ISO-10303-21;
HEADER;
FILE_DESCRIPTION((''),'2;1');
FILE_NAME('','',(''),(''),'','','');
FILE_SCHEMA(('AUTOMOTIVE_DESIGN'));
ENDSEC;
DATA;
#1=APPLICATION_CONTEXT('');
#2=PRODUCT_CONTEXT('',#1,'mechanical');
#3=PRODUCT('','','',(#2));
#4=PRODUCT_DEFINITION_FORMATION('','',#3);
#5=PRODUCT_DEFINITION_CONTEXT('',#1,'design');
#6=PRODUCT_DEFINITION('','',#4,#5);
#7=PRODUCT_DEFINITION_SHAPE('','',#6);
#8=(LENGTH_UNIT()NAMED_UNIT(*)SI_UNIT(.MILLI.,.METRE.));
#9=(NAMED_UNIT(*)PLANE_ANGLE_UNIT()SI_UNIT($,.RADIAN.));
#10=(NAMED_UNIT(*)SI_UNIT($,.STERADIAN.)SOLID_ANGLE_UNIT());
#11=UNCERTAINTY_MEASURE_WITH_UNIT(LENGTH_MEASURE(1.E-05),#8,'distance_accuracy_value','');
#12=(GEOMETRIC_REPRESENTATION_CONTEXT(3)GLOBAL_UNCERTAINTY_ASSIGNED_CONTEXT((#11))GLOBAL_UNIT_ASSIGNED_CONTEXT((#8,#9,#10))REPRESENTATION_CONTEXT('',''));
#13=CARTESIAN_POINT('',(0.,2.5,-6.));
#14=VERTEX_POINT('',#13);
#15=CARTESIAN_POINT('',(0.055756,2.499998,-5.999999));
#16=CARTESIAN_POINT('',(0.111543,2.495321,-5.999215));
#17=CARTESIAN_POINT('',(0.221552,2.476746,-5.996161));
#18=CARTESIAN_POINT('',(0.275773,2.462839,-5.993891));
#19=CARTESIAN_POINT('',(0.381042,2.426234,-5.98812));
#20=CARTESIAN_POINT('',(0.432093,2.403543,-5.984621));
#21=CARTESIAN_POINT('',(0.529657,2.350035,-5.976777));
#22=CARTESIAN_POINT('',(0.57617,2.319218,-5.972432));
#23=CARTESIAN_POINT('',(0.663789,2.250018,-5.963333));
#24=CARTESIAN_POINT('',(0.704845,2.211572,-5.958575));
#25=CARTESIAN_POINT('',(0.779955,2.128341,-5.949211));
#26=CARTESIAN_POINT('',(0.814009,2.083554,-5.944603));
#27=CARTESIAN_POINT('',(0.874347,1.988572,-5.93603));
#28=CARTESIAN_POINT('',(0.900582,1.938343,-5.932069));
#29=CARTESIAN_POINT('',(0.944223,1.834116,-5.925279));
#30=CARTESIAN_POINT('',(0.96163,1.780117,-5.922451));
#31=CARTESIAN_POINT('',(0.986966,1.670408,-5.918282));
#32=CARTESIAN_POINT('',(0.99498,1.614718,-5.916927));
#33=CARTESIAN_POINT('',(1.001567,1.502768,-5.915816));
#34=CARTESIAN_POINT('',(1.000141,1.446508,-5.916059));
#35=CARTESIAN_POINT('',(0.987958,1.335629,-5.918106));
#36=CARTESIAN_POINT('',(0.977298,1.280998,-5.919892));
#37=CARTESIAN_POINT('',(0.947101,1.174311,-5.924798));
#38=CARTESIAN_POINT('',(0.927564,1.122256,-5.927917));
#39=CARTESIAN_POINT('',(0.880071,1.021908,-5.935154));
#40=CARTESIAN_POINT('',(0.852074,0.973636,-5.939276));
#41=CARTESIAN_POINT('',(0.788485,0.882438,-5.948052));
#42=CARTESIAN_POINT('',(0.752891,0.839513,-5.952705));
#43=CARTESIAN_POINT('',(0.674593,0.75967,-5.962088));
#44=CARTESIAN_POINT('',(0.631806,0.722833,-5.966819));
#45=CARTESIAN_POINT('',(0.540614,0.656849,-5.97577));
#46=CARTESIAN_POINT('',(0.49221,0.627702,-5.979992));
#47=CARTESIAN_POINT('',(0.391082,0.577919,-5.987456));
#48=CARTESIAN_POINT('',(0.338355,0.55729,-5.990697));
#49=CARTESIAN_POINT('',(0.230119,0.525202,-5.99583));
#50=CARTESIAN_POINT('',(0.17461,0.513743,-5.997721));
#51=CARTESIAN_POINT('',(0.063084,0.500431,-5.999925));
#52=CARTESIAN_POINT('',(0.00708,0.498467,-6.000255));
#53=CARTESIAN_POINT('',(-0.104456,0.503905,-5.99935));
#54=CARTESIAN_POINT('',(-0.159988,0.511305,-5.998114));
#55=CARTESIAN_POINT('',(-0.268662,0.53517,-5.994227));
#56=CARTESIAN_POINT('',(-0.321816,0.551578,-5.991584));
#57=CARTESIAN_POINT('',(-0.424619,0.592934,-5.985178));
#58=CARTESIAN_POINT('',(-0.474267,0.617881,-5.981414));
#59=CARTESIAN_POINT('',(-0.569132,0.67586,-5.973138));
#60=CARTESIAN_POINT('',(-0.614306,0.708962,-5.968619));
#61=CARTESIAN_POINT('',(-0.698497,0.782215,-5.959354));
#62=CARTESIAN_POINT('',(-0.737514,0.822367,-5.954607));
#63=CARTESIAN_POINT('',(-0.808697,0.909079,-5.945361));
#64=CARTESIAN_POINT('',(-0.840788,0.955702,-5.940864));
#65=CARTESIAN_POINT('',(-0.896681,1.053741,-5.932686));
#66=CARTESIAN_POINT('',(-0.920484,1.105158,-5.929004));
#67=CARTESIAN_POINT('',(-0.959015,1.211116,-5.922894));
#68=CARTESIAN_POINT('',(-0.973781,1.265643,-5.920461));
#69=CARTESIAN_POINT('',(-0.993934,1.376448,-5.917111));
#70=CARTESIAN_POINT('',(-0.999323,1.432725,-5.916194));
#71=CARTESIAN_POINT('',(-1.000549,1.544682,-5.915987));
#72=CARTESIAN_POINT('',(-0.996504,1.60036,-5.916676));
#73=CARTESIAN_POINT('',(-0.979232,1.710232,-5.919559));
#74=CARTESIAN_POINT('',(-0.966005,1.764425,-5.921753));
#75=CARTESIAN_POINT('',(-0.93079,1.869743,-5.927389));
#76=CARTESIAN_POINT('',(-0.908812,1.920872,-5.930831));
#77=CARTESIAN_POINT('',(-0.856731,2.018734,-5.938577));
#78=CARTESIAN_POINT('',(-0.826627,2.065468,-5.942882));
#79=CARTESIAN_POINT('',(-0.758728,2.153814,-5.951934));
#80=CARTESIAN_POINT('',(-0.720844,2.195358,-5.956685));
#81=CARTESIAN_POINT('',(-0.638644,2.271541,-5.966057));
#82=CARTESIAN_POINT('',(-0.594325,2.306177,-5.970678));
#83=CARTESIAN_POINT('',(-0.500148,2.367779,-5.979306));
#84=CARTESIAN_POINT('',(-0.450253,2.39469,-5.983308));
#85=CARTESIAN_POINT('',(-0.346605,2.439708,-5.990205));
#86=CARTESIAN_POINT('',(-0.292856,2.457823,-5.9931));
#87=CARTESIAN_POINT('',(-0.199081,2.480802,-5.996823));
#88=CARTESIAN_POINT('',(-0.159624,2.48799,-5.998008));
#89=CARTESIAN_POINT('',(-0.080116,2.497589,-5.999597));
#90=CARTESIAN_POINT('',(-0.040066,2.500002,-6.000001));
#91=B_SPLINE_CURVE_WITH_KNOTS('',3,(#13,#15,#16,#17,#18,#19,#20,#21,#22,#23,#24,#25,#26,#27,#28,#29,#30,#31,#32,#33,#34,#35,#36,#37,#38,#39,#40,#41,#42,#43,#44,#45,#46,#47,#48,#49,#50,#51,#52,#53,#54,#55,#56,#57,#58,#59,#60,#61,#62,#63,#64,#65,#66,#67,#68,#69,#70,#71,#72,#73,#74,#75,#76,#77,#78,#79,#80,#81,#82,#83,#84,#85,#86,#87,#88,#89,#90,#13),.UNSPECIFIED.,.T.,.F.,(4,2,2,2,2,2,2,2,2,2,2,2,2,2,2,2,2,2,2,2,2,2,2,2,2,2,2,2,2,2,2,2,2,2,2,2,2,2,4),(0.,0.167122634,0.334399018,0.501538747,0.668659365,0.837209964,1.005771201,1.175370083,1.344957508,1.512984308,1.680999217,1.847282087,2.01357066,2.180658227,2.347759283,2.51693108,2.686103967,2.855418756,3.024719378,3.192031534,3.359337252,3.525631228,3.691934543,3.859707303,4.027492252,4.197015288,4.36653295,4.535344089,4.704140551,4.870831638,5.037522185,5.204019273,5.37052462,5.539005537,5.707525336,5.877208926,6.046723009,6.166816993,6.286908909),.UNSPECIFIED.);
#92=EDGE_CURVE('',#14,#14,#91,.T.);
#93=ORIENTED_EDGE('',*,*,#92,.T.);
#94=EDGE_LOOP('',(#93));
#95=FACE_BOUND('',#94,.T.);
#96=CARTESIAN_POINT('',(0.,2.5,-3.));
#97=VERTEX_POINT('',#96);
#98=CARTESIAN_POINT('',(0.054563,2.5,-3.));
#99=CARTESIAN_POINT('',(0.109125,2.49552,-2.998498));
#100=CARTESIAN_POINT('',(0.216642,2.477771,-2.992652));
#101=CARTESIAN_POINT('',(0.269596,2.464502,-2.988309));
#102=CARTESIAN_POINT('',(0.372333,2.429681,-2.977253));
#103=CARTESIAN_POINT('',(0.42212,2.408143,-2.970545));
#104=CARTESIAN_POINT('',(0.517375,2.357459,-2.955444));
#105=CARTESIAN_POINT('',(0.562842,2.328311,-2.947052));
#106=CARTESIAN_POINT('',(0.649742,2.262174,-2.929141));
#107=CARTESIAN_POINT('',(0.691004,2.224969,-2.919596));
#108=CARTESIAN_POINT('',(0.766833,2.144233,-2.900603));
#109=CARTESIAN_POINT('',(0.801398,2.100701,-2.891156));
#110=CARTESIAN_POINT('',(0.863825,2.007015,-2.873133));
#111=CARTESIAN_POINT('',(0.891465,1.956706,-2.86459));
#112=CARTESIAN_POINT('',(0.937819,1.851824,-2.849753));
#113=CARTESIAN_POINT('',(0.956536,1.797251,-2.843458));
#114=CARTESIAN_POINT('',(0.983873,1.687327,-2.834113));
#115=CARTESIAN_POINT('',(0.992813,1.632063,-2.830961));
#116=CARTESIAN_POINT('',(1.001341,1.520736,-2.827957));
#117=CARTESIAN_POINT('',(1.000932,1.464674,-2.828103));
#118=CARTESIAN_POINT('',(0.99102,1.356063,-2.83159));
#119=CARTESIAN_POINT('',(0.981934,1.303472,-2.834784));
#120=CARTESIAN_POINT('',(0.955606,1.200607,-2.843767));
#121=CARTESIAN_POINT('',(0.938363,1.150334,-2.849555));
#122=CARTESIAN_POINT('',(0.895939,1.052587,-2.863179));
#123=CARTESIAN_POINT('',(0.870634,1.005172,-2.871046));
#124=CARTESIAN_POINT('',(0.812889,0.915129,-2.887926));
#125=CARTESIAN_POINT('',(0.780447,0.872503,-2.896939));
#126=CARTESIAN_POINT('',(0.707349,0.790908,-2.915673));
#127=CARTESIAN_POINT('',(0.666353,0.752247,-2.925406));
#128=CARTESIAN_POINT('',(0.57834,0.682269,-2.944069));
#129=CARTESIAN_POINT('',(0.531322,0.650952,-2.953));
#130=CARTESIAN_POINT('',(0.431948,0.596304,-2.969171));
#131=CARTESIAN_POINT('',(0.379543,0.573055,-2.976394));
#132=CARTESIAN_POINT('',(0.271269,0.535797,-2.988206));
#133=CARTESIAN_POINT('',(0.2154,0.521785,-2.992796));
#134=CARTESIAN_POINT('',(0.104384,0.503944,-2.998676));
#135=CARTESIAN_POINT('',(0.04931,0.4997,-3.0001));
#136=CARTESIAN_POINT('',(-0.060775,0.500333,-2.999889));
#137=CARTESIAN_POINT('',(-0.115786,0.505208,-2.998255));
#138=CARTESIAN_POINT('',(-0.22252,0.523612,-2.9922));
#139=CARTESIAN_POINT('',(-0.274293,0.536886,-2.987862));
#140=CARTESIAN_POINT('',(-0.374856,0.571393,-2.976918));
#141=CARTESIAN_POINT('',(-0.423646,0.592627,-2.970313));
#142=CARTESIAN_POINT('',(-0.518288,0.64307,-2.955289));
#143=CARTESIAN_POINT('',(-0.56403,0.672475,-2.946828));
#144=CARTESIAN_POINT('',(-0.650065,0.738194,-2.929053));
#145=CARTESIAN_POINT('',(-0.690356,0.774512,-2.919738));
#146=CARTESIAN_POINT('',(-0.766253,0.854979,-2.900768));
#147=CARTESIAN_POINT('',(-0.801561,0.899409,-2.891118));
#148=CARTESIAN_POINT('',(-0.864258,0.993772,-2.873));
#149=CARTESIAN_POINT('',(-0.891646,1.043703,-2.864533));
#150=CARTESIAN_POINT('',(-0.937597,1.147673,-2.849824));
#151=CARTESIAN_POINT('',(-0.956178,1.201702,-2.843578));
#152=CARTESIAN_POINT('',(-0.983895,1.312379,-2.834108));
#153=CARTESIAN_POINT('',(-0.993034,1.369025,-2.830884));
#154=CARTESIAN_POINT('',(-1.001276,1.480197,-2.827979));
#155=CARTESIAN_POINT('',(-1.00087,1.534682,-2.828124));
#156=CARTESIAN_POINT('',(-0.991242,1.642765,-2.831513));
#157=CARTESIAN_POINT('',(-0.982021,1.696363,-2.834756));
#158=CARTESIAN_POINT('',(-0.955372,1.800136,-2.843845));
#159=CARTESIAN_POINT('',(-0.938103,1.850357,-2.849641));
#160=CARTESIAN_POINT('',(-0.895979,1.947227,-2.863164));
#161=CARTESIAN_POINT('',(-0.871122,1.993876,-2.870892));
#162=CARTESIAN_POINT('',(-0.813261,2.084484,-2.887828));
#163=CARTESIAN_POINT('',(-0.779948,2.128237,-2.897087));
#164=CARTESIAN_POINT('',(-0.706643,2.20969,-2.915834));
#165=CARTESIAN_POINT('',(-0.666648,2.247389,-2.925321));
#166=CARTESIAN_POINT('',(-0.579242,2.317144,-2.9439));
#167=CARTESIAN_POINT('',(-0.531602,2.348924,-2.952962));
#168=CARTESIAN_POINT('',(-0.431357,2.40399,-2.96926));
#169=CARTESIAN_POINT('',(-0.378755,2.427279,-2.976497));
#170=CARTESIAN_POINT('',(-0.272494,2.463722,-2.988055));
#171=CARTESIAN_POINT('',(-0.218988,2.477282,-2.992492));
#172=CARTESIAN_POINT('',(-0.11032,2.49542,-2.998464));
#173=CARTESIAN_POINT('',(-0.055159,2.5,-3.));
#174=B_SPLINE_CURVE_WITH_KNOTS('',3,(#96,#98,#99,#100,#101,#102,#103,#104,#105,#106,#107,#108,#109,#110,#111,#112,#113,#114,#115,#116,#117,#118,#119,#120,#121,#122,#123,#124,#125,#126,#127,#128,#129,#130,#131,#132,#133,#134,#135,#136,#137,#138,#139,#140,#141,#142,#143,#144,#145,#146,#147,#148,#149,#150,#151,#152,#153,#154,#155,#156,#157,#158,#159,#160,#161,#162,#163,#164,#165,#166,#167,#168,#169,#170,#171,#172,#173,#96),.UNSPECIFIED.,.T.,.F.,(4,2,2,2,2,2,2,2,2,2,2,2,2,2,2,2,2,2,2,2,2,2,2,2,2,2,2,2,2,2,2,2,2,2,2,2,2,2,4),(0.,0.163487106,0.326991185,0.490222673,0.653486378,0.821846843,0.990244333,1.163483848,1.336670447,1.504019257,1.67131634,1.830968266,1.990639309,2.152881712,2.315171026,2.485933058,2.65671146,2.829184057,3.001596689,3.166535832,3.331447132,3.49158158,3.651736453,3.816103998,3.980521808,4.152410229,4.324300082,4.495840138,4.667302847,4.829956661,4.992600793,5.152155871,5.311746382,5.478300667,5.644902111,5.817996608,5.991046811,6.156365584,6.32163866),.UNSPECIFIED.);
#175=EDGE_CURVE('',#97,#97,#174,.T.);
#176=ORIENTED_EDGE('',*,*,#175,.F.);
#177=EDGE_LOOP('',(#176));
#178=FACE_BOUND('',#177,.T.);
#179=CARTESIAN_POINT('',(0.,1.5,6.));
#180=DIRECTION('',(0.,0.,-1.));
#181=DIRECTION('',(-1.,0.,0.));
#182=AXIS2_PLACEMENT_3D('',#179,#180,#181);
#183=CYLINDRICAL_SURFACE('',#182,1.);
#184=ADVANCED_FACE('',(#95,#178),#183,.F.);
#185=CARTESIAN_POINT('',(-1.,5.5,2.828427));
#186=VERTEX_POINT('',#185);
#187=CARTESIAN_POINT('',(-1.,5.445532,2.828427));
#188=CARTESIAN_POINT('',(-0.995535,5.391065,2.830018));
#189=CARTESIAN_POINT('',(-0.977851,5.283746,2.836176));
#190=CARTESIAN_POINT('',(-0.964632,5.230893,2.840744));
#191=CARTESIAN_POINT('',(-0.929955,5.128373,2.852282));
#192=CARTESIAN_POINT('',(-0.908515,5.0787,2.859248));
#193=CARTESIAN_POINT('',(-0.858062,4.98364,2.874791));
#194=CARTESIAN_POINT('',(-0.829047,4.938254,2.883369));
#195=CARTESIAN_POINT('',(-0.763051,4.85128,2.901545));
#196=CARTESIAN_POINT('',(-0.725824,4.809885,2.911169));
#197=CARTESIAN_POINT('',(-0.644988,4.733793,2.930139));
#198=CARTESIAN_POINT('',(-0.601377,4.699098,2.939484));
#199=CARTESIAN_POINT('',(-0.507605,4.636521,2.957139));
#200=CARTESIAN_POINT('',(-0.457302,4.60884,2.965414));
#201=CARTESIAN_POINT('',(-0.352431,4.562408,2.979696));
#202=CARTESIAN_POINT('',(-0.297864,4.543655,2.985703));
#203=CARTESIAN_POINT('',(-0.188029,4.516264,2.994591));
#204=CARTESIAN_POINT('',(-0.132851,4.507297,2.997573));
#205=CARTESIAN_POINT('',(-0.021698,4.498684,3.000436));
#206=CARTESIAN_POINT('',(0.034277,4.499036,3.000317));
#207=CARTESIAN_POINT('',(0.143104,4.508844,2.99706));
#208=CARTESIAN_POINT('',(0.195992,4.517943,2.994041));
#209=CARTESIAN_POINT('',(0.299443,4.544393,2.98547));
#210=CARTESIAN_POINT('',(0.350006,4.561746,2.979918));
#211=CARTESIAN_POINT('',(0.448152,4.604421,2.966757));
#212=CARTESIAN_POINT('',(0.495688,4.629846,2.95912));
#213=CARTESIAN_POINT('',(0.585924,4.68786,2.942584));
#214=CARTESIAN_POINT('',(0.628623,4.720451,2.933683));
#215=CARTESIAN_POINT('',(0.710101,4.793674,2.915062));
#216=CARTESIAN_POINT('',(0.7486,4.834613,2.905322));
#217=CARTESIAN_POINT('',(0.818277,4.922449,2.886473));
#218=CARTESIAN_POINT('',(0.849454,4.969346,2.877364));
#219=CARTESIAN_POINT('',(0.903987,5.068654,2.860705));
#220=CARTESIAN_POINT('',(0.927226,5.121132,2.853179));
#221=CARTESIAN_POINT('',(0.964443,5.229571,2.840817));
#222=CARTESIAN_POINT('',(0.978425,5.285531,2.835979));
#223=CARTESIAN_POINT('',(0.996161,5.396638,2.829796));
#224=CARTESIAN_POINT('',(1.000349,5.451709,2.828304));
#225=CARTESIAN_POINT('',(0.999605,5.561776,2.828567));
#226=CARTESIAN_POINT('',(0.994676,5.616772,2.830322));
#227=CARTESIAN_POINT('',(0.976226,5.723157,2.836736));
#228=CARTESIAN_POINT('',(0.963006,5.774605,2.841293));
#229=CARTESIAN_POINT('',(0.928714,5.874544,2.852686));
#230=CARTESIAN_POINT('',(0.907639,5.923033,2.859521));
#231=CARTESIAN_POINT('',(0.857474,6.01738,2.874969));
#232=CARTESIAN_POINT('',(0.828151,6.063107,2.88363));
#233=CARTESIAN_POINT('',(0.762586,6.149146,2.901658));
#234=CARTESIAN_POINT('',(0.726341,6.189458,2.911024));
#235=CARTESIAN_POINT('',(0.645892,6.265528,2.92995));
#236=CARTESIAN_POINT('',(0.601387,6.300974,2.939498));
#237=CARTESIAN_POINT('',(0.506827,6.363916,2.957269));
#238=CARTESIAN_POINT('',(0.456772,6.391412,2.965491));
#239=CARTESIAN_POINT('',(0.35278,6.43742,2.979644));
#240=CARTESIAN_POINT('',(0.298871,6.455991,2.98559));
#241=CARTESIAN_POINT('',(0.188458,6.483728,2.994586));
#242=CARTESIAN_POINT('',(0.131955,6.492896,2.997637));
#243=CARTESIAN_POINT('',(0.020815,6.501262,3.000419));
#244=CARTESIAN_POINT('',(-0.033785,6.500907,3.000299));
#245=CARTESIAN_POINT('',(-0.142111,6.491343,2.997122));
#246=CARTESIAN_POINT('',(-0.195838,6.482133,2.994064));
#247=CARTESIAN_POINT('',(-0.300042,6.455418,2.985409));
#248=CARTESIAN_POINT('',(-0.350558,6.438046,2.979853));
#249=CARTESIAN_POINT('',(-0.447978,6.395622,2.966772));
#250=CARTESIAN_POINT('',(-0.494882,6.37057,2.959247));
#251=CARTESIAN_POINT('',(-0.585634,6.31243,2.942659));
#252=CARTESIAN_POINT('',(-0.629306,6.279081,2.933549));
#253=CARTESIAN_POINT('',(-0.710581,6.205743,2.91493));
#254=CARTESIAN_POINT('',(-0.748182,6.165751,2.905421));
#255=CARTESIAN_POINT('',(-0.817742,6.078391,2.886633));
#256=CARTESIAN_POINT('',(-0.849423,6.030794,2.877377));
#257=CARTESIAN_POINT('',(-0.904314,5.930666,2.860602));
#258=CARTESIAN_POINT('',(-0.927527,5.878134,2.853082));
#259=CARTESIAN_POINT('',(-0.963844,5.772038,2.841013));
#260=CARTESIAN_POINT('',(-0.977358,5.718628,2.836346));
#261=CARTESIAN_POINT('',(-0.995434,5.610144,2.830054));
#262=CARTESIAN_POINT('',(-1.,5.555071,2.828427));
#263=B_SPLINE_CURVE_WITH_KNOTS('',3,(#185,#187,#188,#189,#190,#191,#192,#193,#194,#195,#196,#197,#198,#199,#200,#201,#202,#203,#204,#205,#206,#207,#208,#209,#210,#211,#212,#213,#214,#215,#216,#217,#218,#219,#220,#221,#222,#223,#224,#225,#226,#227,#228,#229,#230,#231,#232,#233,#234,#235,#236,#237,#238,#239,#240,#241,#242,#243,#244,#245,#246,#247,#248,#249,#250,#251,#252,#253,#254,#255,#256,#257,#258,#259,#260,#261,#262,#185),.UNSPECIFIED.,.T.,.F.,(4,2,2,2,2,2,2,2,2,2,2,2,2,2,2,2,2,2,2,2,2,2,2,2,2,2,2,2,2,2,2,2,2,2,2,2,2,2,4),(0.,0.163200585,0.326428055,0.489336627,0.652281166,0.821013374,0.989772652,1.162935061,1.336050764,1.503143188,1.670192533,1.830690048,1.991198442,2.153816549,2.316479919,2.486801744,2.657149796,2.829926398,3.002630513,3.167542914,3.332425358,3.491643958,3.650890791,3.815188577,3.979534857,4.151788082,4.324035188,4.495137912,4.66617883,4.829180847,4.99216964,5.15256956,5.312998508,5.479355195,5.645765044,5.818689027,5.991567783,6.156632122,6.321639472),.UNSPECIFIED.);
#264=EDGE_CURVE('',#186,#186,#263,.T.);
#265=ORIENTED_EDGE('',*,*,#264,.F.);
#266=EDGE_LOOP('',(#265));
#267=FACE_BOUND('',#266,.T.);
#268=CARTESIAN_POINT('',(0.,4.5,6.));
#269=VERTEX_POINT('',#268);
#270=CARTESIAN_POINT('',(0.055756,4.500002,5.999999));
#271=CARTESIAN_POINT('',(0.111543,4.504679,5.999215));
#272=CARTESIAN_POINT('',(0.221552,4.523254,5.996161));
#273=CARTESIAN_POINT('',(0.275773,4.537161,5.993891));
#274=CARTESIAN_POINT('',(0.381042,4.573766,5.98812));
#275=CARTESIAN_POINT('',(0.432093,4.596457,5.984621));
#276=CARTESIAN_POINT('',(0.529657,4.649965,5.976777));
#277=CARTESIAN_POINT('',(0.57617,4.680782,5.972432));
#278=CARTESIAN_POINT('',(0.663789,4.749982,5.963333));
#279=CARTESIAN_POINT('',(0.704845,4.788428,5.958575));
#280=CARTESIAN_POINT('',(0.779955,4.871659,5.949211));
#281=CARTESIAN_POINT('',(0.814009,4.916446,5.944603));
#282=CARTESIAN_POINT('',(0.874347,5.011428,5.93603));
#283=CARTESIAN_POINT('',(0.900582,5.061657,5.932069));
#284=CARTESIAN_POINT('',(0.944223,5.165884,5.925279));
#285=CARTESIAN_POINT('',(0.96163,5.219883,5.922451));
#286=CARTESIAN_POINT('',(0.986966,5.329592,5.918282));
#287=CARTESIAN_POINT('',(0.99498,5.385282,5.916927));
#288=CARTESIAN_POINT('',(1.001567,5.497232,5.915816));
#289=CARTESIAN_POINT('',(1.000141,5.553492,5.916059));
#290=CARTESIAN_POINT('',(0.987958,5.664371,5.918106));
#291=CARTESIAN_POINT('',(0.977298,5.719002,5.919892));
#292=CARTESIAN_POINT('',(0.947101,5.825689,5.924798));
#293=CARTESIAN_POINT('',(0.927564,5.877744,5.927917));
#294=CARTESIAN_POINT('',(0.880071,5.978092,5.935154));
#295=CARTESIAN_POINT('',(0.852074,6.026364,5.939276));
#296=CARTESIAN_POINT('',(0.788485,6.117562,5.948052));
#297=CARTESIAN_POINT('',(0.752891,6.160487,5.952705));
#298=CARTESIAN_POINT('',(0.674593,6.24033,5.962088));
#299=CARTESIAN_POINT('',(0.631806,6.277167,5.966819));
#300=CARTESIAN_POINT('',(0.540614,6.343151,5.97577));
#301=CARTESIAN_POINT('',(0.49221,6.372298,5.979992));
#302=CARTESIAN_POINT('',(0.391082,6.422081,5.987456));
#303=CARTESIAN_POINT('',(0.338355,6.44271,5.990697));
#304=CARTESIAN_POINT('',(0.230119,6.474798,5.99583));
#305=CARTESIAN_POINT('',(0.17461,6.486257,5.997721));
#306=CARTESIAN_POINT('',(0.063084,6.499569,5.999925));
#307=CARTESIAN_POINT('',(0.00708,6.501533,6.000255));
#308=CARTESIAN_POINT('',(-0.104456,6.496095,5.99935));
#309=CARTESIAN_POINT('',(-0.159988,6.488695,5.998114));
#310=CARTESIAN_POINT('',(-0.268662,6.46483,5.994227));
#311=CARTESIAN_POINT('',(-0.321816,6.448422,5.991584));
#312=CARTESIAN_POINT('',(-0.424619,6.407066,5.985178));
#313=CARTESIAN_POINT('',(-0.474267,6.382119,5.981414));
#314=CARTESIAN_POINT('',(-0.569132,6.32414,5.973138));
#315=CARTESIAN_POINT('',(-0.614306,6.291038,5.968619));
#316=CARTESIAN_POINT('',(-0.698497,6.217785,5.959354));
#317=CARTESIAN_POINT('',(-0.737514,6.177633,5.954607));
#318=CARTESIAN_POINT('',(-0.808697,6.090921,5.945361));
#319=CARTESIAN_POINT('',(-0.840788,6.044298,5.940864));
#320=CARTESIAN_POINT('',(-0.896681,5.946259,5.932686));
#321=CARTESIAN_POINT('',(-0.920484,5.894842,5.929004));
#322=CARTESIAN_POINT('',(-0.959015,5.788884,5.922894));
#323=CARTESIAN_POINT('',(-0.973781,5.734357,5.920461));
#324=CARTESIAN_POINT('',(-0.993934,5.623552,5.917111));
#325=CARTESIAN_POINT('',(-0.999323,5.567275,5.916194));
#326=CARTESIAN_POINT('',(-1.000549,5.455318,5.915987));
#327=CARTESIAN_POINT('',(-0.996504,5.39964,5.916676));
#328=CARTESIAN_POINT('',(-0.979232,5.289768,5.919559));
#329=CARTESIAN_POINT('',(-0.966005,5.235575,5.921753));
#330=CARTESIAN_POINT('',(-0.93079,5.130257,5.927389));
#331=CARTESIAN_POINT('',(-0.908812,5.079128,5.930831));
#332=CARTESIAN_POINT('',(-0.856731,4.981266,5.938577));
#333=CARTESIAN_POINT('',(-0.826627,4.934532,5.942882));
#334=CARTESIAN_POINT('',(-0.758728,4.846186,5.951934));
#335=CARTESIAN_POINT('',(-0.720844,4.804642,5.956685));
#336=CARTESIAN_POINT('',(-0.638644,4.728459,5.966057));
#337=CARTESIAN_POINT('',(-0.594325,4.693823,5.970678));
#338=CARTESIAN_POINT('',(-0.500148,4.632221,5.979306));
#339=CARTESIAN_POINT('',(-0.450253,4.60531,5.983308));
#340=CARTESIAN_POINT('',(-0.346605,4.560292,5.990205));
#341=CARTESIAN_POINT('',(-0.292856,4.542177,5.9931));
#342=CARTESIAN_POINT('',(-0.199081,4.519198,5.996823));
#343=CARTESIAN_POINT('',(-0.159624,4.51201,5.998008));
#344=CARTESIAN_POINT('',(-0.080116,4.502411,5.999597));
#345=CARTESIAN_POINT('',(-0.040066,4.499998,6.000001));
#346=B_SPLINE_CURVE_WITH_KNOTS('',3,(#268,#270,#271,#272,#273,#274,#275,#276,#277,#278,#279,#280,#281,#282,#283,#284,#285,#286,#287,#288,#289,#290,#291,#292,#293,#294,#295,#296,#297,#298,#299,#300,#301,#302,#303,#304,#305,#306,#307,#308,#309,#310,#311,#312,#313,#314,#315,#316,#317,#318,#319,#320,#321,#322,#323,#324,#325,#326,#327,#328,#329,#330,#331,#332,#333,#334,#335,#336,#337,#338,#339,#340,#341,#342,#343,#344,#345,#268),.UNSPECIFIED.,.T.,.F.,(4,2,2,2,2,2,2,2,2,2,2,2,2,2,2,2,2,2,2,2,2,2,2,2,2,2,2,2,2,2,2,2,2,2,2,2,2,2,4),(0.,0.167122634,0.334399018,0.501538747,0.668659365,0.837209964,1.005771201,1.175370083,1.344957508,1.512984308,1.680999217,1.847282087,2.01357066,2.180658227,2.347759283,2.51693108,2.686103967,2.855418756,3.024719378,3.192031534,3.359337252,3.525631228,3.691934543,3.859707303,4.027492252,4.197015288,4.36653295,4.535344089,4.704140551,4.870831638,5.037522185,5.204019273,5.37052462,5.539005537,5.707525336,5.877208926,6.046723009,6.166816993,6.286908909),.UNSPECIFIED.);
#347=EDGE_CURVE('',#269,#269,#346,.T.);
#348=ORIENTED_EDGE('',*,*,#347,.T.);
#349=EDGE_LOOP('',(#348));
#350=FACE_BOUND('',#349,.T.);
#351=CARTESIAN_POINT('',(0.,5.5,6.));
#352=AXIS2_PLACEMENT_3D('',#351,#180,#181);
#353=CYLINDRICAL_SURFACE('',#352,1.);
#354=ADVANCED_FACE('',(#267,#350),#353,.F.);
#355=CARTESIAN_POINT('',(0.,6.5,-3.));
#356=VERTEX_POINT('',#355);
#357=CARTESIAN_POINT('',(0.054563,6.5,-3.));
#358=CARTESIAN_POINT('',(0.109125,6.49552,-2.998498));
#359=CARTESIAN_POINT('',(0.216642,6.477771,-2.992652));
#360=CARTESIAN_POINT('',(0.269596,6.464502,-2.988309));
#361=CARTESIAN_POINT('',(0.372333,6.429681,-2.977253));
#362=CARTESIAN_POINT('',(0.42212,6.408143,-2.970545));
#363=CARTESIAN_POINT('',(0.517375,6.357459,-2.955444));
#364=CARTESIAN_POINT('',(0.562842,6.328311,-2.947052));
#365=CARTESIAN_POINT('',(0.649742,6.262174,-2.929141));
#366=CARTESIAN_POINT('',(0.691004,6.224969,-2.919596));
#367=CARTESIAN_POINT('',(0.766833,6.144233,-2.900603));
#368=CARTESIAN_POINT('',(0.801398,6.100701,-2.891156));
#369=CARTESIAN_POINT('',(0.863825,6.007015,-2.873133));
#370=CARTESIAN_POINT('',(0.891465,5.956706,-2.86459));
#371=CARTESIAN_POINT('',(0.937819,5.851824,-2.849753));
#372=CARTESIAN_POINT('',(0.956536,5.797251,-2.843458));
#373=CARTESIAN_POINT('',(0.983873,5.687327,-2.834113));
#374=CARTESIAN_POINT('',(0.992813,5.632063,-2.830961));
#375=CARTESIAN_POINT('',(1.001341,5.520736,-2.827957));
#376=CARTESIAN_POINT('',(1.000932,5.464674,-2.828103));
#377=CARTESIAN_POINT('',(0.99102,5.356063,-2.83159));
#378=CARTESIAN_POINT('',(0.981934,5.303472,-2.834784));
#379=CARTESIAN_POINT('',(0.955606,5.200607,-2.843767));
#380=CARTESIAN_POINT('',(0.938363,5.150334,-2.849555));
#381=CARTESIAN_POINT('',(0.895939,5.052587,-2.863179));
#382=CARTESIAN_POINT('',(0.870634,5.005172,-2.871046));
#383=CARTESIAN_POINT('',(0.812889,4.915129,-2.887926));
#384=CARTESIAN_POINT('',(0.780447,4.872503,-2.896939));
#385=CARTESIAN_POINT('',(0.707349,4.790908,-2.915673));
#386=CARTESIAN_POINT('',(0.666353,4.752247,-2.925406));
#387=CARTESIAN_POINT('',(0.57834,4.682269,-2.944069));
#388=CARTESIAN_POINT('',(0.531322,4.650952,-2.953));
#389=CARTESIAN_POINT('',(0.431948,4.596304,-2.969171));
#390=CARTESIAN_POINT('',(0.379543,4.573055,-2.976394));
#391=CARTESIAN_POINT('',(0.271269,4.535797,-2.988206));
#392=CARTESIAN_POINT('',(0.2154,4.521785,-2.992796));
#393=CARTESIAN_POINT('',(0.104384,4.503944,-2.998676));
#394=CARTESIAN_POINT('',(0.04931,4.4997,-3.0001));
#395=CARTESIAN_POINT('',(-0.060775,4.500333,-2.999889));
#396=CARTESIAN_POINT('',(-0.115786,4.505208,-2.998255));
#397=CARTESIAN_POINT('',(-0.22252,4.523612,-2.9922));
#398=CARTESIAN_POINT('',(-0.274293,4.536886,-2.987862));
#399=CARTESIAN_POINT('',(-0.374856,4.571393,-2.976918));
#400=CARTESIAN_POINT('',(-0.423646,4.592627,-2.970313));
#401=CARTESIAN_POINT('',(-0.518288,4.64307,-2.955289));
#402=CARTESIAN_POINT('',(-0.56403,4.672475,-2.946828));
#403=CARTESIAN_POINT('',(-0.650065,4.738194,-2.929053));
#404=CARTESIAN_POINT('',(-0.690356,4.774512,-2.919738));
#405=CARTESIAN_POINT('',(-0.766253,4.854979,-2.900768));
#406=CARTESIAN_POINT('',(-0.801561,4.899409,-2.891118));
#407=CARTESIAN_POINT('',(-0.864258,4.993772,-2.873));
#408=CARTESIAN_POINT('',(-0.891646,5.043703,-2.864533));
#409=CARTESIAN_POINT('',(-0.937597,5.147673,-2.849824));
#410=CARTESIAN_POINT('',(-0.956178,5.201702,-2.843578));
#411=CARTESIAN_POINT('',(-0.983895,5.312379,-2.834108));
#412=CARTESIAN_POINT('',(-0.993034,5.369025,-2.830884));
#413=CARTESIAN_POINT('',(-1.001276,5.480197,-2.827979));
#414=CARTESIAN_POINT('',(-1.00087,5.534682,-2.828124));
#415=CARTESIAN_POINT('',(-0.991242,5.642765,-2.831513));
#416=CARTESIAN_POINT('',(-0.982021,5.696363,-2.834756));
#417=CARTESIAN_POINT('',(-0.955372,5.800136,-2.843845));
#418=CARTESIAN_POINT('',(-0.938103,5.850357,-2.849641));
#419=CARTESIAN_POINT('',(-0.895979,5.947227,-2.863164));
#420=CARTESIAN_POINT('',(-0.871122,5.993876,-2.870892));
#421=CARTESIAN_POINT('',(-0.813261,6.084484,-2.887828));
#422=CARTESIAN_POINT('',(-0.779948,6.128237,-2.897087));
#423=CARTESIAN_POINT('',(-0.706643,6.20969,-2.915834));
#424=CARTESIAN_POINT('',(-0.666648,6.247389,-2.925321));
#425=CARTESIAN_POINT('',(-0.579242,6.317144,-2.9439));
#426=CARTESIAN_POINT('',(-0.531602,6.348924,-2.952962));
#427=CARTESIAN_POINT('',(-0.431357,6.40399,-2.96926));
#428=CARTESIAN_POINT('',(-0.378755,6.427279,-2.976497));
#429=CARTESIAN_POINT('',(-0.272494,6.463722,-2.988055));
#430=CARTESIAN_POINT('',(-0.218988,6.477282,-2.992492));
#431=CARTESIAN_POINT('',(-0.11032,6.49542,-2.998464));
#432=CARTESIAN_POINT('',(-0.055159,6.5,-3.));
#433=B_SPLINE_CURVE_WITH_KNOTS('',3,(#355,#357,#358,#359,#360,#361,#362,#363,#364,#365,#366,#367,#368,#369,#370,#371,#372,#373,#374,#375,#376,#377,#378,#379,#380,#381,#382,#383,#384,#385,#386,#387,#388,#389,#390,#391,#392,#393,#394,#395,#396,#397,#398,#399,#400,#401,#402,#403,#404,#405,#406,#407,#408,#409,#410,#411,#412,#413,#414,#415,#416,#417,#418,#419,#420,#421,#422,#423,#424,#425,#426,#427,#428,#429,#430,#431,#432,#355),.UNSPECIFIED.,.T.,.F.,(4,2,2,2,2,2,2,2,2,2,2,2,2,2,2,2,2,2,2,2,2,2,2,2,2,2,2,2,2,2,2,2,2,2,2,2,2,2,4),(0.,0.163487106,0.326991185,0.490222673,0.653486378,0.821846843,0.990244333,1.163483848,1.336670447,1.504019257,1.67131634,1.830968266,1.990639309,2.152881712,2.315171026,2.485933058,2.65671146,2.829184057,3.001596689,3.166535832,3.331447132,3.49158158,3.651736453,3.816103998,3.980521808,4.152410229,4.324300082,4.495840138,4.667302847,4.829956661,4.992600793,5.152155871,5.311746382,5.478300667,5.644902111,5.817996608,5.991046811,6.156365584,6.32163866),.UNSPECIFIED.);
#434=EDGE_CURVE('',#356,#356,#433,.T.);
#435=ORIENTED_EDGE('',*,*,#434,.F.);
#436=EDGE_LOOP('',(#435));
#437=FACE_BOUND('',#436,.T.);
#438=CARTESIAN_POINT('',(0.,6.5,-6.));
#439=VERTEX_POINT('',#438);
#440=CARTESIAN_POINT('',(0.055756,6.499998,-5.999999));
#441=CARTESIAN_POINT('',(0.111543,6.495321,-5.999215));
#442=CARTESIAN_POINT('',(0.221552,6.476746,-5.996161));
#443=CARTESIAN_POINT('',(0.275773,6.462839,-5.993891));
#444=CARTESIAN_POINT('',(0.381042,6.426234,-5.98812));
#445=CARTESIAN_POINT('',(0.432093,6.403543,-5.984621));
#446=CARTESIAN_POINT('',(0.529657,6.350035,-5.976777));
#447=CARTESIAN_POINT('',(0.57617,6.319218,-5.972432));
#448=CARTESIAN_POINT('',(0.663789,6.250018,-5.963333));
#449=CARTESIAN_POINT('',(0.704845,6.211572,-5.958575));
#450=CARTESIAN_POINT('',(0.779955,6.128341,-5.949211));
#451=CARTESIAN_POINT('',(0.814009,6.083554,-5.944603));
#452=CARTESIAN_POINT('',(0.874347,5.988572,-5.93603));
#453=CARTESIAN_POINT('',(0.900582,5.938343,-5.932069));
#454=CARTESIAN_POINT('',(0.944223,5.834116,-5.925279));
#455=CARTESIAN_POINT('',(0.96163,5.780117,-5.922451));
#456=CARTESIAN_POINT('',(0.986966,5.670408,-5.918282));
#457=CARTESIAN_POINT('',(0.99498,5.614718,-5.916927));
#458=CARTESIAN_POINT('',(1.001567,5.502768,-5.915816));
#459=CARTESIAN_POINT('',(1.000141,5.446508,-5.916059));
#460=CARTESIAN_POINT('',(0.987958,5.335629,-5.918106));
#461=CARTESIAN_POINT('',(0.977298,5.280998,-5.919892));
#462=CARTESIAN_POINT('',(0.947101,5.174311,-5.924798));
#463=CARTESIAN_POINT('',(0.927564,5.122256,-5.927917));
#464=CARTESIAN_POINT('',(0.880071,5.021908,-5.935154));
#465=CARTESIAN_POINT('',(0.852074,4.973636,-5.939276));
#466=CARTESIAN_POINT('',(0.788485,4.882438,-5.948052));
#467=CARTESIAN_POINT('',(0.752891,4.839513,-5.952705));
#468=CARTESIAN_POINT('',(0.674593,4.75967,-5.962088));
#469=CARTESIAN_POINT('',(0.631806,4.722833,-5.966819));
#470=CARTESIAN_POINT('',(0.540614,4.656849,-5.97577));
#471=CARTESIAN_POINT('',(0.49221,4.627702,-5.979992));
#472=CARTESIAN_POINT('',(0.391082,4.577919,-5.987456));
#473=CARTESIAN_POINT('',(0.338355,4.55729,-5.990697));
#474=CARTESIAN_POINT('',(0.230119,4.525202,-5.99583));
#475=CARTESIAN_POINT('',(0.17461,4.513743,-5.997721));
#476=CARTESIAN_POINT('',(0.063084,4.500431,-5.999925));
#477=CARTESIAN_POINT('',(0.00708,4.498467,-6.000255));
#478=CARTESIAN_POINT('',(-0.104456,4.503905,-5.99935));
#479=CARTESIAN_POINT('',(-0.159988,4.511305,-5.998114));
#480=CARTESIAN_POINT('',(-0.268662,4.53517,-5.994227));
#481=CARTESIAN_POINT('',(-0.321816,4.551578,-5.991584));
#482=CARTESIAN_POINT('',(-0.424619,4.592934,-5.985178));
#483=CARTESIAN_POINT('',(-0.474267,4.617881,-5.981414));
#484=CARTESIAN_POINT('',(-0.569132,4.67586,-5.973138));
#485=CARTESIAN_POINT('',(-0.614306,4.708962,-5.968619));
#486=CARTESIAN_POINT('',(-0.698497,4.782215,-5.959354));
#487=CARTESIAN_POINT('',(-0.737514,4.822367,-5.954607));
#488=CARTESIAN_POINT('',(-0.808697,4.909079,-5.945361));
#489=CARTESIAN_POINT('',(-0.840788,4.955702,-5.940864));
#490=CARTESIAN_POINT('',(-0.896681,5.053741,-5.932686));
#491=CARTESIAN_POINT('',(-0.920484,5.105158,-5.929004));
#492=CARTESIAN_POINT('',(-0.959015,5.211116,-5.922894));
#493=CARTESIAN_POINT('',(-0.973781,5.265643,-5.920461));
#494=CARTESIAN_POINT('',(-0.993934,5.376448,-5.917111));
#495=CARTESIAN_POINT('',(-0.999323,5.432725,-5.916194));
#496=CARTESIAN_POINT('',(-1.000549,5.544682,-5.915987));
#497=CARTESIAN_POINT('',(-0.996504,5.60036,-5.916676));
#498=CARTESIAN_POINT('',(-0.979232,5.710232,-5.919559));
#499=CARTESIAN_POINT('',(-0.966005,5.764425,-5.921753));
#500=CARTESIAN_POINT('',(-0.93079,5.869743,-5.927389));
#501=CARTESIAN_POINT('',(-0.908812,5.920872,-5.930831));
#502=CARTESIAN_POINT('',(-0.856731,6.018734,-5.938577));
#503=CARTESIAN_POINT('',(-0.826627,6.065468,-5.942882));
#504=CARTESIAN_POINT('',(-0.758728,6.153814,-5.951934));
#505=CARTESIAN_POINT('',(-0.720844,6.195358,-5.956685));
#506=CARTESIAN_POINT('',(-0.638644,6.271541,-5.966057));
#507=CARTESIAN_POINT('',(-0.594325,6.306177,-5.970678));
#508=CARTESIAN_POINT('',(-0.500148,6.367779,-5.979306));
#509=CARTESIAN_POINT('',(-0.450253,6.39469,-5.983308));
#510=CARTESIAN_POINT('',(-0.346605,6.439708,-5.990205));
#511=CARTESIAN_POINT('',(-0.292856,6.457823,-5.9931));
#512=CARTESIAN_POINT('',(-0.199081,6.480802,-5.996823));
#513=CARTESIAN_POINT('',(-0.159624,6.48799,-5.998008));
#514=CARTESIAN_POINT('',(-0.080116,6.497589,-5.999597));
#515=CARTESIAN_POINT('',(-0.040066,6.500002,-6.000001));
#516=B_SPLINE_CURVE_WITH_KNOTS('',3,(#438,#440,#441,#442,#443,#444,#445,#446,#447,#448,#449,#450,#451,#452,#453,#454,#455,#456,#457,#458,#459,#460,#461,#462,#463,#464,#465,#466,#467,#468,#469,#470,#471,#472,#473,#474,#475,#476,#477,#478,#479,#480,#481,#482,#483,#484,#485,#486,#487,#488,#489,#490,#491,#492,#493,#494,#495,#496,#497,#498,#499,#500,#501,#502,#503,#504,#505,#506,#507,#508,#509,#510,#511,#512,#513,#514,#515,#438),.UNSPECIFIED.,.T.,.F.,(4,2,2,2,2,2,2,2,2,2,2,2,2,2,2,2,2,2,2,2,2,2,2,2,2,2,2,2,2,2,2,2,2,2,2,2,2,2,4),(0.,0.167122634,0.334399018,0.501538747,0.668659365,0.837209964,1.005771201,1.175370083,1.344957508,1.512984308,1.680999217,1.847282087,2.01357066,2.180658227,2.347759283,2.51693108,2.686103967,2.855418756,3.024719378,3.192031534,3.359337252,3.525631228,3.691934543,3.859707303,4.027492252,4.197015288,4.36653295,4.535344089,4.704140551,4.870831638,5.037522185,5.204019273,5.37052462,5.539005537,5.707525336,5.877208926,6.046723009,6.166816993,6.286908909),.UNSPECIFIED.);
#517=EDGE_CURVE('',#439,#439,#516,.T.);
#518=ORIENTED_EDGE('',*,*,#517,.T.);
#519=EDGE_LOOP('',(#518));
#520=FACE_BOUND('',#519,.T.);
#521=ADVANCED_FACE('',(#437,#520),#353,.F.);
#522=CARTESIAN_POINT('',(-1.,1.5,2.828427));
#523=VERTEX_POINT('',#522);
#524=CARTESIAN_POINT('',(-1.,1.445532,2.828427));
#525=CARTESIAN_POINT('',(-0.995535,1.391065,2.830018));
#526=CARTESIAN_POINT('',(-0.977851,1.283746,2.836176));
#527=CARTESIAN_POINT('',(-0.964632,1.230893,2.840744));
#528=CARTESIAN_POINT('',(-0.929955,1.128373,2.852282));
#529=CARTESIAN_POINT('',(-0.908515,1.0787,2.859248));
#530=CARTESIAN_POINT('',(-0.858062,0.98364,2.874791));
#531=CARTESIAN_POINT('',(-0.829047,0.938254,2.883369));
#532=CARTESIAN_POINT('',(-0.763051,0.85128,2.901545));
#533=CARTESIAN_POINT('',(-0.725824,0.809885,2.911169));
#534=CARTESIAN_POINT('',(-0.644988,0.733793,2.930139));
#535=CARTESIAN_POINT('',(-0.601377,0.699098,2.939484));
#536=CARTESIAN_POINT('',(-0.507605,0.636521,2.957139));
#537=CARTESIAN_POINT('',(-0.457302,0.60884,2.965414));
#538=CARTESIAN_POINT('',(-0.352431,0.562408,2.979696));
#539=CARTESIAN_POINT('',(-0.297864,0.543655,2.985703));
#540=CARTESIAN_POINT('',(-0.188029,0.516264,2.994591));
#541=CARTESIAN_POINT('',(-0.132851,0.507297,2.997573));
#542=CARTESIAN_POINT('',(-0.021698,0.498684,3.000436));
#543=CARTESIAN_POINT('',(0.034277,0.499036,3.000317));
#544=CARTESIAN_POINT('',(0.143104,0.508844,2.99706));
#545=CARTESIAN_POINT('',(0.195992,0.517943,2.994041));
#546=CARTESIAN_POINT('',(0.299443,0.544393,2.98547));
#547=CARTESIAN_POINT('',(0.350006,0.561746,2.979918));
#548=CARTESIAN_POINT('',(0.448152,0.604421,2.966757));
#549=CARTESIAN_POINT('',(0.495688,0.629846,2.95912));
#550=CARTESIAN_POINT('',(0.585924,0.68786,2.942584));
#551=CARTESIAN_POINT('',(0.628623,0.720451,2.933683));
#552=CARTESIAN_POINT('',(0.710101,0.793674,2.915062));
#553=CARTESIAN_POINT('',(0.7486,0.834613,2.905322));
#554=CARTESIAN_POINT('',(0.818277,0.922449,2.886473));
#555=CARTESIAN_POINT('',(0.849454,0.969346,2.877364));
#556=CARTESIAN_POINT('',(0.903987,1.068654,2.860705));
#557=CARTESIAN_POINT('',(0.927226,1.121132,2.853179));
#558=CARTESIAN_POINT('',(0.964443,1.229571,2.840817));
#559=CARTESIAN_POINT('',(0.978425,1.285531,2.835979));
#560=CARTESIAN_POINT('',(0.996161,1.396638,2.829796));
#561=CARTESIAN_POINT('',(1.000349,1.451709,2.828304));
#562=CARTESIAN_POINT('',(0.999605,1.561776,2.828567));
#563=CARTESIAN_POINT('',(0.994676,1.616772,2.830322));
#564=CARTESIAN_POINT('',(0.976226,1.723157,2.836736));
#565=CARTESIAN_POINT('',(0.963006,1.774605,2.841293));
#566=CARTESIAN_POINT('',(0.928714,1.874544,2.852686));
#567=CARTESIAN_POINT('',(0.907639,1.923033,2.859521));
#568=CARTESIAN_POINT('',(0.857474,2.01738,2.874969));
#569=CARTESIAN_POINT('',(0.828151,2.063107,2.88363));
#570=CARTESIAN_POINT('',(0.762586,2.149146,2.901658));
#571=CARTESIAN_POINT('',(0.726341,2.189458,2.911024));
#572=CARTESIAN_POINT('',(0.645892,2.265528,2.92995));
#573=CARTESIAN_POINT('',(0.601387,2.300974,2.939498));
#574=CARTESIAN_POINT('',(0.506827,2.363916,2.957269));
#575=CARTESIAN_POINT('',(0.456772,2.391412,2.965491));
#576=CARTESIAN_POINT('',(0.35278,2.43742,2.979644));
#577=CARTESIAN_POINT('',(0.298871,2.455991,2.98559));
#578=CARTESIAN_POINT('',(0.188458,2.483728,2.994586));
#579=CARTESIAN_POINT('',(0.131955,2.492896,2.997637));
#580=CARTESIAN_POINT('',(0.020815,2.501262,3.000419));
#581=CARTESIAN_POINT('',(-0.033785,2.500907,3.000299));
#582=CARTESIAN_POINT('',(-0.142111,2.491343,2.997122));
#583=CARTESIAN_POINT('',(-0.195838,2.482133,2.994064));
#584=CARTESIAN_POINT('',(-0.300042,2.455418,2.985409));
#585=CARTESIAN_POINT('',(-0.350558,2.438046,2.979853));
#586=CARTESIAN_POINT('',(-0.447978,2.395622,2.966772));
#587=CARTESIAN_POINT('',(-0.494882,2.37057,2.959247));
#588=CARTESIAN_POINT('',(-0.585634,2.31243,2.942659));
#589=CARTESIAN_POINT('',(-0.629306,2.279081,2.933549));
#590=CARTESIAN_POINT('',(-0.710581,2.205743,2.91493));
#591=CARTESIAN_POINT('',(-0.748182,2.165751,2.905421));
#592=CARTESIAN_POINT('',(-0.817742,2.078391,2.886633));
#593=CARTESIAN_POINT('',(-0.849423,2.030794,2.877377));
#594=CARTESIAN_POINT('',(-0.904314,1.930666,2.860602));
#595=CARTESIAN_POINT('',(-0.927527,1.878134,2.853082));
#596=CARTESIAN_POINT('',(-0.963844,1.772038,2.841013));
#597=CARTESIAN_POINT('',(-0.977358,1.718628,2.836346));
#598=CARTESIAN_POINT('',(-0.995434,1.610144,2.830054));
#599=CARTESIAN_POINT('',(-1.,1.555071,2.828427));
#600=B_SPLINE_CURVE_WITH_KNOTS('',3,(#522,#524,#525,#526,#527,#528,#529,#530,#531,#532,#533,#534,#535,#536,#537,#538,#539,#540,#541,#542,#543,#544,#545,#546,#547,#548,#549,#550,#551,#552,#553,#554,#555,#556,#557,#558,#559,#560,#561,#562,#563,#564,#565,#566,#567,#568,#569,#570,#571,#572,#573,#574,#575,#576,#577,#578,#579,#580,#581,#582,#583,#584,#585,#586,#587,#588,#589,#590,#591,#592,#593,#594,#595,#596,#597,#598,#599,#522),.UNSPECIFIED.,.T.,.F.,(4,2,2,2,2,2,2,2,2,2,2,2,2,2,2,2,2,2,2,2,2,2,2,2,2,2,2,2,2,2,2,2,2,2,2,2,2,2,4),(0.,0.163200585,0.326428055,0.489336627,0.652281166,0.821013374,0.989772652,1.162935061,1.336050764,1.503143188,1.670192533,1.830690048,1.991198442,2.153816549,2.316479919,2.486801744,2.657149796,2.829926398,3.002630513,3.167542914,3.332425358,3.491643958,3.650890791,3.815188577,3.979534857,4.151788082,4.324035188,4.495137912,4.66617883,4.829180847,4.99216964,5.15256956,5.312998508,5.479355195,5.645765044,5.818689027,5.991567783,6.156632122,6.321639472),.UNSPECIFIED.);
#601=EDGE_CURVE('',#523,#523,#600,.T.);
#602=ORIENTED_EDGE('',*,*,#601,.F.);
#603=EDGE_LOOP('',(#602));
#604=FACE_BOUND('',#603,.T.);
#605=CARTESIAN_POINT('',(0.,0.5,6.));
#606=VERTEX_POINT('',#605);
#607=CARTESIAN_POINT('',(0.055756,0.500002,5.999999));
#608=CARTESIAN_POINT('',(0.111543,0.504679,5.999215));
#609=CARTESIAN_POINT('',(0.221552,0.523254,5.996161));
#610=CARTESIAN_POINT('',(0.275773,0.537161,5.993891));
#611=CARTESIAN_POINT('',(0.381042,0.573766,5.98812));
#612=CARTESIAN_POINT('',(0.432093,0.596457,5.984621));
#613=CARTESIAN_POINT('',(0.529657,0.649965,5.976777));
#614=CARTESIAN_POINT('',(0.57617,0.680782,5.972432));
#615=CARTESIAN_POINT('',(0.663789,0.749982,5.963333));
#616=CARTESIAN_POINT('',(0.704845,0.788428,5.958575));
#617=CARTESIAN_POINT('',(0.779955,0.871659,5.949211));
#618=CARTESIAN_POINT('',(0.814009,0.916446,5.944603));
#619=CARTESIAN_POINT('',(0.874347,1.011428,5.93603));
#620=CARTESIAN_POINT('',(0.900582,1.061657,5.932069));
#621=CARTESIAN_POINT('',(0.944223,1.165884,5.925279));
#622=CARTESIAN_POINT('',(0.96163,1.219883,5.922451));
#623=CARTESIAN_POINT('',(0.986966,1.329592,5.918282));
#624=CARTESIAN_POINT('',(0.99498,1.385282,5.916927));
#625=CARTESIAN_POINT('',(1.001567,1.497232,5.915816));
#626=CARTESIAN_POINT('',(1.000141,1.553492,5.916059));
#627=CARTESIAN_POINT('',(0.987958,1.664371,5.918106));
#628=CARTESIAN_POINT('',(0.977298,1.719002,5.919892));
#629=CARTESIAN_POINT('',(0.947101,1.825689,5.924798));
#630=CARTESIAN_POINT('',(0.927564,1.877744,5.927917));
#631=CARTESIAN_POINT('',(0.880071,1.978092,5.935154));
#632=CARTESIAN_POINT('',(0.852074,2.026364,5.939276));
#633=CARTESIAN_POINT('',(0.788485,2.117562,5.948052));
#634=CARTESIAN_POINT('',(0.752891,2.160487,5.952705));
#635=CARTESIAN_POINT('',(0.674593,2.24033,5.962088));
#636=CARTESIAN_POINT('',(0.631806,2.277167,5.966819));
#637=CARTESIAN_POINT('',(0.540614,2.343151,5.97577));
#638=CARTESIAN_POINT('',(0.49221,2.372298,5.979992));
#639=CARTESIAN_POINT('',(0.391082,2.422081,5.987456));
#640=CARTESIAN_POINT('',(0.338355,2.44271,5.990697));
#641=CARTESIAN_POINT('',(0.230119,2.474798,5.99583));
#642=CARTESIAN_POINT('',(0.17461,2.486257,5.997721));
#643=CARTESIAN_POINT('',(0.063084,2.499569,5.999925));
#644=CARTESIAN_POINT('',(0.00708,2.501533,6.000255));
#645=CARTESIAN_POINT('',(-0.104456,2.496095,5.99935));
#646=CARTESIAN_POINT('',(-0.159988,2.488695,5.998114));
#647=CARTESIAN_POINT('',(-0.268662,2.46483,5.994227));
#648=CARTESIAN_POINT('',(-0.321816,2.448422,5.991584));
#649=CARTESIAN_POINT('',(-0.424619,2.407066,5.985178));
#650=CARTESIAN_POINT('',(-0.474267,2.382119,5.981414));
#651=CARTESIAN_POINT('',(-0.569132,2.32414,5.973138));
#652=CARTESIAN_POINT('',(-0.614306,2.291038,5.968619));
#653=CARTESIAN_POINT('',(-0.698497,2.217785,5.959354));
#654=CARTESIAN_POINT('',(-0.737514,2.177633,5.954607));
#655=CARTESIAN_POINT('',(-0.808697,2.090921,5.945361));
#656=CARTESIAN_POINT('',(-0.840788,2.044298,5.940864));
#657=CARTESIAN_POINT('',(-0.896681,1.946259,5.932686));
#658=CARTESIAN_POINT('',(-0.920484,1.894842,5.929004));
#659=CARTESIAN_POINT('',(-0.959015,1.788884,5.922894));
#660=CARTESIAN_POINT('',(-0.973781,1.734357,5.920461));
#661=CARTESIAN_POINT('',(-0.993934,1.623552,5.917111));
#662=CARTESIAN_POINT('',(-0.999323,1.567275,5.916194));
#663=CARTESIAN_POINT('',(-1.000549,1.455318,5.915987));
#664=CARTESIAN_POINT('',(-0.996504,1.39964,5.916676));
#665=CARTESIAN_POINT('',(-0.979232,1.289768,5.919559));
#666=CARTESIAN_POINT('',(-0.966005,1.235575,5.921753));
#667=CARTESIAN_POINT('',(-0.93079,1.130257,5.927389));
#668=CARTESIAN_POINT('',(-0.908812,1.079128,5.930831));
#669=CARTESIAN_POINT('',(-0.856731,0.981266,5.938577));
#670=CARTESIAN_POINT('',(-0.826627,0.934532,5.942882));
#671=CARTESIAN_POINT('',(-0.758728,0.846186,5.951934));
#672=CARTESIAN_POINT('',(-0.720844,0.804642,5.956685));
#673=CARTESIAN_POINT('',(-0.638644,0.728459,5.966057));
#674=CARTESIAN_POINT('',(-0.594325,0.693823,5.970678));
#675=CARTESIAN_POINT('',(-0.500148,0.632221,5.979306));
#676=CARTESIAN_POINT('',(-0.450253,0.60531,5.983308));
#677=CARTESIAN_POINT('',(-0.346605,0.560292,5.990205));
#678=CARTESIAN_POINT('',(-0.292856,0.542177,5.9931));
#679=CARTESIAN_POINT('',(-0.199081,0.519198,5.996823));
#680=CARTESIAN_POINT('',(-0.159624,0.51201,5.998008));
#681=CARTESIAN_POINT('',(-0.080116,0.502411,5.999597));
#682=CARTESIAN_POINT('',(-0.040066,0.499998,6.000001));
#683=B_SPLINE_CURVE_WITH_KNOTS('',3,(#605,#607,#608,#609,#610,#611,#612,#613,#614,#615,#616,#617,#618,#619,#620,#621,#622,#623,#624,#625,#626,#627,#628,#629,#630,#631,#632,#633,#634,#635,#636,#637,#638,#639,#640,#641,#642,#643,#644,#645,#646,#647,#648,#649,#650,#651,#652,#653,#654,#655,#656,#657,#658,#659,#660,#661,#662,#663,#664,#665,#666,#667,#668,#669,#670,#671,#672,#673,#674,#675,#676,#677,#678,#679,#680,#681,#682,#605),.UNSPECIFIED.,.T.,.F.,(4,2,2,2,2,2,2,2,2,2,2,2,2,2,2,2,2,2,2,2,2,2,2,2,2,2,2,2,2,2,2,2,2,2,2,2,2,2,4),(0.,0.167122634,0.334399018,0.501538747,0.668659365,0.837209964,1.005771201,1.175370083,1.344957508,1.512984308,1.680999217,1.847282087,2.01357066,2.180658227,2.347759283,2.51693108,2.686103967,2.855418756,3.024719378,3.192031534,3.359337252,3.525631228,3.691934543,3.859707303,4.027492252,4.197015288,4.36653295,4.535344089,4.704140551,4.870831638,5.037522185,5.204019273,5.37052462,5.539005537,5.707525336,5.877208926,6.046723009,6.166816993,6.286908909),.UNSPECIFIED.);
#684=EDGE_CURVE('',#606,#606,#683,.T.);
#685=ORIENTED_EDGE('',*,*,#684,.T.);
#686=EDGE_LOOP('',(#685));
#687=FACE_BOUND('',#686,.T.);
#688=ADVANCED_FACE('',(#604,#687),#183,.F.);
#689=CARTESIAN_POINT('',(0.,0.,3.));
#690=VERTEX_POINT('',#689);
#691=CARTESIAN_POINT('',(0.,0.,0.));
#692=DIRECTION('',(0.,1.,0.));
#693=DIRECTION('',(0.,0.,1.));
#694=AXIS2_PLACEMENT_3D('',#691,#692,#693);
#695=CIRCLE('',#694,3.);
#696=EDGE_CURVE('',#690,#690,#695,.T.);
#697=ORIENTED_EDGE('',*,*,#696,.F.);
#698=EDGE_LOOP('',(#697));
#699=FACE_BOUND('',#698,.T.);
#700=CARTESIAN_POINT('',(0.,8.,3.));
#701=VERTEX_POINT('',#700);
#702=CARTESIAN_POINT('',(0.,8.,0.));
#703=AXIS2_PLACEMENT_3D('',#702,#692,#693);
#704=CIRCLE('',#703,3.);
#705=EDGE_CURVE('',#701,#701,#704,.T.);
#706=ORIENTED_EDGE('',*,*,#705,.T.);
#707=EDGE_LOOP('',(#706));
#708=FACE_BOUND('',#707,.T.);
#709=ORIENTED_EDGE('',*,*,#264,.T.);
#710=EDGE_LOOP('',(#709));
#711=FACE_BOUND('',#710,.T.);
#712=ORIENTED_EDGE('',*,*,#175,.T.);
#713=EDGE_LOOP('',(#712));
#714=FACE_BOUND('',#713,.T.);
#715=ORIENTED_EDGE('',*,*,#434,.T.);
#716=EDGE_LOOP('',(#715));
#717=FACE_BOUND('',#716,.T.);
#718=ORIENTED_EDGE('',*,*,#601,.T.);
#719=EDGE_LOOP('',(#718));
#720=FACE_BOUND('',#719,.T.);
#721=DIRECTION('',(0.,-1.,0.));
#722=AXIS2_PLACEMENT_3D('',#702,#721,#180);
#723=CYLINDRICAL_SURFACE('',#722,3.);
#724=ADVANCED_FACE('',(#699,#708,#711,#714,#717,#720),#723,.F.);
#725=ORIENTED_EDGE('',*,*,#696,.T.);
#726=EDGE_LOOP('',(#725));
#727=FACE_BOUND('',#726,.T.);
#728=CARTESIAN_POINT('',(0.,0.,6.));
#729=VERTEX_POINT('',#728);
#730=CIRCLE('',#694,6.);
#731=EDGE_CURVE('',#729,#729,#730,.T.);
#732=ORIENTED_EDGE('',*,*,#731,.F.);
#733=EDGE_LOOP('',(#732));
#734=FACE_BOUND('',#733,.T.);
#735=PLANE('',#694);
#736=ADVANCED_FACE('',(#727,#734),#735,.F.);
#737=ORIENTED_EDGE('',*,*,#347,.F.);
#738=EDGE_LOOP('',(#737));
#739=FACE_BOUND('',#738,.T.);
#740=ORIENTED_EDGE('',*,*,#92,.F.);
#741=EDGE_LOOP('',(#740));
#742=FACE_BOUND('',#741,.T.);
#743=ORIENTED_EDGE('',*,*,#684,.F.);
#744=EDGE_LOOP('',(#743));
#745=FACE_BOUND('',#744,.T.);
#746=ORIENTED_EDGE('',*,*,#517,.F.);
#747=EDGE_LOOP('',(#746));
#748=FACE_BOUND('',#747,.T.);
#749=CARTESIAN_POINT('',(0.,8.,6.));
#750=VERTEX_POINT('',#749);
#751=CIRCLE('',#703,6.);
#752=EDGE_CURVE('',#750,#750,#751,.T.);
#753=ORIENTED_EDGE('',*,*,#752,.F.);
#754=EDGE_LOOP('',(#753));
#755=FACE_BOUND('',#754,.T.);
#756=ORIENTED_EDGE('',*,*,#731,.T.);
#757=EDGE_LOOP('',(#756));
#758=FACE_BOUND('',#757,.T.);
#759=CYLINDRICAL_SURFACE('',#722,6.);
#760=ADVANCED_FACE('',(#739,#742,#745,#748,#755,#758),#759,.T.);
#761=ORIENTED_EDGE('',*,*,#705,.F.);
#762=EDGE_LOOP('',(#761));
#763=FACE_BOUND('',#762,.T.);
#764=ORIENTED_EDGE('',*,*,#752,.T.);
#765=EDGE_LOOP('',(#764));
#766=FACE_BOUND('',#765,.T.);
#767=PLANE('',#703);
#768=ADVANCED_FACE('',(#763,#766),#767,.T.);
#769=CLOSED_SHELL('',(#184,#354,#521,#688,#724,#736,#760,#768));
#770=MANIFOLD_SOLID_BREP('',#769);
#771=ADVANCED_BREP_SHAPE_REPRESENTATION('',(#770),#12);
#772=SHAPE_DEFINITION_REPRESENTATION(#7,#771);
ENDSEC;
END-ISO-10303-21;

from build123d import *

# Parameters (mm, degrees)
SKETCH1_R              = 6
SKETCH1_R_2            = 3
BOSS_EXTRUDE1_DEPTH    = 8
CUT_EXTRUDE1_START     = -6.000000101
CUT_EXTRUDE1_OUTLINE_R = 1
CUT_EXTRUDE1_DEPTH     = 12.000000201


# Read off the part's stored shape, not the designer's step: Cut-Extrude1
with BuildPart() as part:
    # Sketch1 → Boss-Extrude1 (new body)
    with BuildSketch(Plane(origin=(0, 0, 0), x_dir=(1, 0, 0), z_dir=(0, 1, 0))):
        with Locations(Location((0, 0, 0), (0, 0, 270))):
            Circle(SKETCH1_R)
        with Locations(Location((0, 0, 0), (0, 0, 270))):
            Circle(SKETCH1_R_2, mode=Mode.SUBTRACT)
    extrude(amount=BOSS_EXTRUDE1_DEPTH)

    # Cut-Extrude1 outline → Cut-Extrude1 (cut)
    with BuildSketch(Plane.XY.offset(CUT_EXTRUDE1_START)):
        with Locations((0, 1.5)):
            Circle(CUT_EXTRUDE1_OUTLINE_R)
        with Locations((0, 5.5)):
            Circle(CUT_EXTRUDE1_OUTLINE_R)
    extrude(amount=CUT_EXTRUDE1_DEPTH, mode=Mode.SUBTRACT)


solid = part.part
